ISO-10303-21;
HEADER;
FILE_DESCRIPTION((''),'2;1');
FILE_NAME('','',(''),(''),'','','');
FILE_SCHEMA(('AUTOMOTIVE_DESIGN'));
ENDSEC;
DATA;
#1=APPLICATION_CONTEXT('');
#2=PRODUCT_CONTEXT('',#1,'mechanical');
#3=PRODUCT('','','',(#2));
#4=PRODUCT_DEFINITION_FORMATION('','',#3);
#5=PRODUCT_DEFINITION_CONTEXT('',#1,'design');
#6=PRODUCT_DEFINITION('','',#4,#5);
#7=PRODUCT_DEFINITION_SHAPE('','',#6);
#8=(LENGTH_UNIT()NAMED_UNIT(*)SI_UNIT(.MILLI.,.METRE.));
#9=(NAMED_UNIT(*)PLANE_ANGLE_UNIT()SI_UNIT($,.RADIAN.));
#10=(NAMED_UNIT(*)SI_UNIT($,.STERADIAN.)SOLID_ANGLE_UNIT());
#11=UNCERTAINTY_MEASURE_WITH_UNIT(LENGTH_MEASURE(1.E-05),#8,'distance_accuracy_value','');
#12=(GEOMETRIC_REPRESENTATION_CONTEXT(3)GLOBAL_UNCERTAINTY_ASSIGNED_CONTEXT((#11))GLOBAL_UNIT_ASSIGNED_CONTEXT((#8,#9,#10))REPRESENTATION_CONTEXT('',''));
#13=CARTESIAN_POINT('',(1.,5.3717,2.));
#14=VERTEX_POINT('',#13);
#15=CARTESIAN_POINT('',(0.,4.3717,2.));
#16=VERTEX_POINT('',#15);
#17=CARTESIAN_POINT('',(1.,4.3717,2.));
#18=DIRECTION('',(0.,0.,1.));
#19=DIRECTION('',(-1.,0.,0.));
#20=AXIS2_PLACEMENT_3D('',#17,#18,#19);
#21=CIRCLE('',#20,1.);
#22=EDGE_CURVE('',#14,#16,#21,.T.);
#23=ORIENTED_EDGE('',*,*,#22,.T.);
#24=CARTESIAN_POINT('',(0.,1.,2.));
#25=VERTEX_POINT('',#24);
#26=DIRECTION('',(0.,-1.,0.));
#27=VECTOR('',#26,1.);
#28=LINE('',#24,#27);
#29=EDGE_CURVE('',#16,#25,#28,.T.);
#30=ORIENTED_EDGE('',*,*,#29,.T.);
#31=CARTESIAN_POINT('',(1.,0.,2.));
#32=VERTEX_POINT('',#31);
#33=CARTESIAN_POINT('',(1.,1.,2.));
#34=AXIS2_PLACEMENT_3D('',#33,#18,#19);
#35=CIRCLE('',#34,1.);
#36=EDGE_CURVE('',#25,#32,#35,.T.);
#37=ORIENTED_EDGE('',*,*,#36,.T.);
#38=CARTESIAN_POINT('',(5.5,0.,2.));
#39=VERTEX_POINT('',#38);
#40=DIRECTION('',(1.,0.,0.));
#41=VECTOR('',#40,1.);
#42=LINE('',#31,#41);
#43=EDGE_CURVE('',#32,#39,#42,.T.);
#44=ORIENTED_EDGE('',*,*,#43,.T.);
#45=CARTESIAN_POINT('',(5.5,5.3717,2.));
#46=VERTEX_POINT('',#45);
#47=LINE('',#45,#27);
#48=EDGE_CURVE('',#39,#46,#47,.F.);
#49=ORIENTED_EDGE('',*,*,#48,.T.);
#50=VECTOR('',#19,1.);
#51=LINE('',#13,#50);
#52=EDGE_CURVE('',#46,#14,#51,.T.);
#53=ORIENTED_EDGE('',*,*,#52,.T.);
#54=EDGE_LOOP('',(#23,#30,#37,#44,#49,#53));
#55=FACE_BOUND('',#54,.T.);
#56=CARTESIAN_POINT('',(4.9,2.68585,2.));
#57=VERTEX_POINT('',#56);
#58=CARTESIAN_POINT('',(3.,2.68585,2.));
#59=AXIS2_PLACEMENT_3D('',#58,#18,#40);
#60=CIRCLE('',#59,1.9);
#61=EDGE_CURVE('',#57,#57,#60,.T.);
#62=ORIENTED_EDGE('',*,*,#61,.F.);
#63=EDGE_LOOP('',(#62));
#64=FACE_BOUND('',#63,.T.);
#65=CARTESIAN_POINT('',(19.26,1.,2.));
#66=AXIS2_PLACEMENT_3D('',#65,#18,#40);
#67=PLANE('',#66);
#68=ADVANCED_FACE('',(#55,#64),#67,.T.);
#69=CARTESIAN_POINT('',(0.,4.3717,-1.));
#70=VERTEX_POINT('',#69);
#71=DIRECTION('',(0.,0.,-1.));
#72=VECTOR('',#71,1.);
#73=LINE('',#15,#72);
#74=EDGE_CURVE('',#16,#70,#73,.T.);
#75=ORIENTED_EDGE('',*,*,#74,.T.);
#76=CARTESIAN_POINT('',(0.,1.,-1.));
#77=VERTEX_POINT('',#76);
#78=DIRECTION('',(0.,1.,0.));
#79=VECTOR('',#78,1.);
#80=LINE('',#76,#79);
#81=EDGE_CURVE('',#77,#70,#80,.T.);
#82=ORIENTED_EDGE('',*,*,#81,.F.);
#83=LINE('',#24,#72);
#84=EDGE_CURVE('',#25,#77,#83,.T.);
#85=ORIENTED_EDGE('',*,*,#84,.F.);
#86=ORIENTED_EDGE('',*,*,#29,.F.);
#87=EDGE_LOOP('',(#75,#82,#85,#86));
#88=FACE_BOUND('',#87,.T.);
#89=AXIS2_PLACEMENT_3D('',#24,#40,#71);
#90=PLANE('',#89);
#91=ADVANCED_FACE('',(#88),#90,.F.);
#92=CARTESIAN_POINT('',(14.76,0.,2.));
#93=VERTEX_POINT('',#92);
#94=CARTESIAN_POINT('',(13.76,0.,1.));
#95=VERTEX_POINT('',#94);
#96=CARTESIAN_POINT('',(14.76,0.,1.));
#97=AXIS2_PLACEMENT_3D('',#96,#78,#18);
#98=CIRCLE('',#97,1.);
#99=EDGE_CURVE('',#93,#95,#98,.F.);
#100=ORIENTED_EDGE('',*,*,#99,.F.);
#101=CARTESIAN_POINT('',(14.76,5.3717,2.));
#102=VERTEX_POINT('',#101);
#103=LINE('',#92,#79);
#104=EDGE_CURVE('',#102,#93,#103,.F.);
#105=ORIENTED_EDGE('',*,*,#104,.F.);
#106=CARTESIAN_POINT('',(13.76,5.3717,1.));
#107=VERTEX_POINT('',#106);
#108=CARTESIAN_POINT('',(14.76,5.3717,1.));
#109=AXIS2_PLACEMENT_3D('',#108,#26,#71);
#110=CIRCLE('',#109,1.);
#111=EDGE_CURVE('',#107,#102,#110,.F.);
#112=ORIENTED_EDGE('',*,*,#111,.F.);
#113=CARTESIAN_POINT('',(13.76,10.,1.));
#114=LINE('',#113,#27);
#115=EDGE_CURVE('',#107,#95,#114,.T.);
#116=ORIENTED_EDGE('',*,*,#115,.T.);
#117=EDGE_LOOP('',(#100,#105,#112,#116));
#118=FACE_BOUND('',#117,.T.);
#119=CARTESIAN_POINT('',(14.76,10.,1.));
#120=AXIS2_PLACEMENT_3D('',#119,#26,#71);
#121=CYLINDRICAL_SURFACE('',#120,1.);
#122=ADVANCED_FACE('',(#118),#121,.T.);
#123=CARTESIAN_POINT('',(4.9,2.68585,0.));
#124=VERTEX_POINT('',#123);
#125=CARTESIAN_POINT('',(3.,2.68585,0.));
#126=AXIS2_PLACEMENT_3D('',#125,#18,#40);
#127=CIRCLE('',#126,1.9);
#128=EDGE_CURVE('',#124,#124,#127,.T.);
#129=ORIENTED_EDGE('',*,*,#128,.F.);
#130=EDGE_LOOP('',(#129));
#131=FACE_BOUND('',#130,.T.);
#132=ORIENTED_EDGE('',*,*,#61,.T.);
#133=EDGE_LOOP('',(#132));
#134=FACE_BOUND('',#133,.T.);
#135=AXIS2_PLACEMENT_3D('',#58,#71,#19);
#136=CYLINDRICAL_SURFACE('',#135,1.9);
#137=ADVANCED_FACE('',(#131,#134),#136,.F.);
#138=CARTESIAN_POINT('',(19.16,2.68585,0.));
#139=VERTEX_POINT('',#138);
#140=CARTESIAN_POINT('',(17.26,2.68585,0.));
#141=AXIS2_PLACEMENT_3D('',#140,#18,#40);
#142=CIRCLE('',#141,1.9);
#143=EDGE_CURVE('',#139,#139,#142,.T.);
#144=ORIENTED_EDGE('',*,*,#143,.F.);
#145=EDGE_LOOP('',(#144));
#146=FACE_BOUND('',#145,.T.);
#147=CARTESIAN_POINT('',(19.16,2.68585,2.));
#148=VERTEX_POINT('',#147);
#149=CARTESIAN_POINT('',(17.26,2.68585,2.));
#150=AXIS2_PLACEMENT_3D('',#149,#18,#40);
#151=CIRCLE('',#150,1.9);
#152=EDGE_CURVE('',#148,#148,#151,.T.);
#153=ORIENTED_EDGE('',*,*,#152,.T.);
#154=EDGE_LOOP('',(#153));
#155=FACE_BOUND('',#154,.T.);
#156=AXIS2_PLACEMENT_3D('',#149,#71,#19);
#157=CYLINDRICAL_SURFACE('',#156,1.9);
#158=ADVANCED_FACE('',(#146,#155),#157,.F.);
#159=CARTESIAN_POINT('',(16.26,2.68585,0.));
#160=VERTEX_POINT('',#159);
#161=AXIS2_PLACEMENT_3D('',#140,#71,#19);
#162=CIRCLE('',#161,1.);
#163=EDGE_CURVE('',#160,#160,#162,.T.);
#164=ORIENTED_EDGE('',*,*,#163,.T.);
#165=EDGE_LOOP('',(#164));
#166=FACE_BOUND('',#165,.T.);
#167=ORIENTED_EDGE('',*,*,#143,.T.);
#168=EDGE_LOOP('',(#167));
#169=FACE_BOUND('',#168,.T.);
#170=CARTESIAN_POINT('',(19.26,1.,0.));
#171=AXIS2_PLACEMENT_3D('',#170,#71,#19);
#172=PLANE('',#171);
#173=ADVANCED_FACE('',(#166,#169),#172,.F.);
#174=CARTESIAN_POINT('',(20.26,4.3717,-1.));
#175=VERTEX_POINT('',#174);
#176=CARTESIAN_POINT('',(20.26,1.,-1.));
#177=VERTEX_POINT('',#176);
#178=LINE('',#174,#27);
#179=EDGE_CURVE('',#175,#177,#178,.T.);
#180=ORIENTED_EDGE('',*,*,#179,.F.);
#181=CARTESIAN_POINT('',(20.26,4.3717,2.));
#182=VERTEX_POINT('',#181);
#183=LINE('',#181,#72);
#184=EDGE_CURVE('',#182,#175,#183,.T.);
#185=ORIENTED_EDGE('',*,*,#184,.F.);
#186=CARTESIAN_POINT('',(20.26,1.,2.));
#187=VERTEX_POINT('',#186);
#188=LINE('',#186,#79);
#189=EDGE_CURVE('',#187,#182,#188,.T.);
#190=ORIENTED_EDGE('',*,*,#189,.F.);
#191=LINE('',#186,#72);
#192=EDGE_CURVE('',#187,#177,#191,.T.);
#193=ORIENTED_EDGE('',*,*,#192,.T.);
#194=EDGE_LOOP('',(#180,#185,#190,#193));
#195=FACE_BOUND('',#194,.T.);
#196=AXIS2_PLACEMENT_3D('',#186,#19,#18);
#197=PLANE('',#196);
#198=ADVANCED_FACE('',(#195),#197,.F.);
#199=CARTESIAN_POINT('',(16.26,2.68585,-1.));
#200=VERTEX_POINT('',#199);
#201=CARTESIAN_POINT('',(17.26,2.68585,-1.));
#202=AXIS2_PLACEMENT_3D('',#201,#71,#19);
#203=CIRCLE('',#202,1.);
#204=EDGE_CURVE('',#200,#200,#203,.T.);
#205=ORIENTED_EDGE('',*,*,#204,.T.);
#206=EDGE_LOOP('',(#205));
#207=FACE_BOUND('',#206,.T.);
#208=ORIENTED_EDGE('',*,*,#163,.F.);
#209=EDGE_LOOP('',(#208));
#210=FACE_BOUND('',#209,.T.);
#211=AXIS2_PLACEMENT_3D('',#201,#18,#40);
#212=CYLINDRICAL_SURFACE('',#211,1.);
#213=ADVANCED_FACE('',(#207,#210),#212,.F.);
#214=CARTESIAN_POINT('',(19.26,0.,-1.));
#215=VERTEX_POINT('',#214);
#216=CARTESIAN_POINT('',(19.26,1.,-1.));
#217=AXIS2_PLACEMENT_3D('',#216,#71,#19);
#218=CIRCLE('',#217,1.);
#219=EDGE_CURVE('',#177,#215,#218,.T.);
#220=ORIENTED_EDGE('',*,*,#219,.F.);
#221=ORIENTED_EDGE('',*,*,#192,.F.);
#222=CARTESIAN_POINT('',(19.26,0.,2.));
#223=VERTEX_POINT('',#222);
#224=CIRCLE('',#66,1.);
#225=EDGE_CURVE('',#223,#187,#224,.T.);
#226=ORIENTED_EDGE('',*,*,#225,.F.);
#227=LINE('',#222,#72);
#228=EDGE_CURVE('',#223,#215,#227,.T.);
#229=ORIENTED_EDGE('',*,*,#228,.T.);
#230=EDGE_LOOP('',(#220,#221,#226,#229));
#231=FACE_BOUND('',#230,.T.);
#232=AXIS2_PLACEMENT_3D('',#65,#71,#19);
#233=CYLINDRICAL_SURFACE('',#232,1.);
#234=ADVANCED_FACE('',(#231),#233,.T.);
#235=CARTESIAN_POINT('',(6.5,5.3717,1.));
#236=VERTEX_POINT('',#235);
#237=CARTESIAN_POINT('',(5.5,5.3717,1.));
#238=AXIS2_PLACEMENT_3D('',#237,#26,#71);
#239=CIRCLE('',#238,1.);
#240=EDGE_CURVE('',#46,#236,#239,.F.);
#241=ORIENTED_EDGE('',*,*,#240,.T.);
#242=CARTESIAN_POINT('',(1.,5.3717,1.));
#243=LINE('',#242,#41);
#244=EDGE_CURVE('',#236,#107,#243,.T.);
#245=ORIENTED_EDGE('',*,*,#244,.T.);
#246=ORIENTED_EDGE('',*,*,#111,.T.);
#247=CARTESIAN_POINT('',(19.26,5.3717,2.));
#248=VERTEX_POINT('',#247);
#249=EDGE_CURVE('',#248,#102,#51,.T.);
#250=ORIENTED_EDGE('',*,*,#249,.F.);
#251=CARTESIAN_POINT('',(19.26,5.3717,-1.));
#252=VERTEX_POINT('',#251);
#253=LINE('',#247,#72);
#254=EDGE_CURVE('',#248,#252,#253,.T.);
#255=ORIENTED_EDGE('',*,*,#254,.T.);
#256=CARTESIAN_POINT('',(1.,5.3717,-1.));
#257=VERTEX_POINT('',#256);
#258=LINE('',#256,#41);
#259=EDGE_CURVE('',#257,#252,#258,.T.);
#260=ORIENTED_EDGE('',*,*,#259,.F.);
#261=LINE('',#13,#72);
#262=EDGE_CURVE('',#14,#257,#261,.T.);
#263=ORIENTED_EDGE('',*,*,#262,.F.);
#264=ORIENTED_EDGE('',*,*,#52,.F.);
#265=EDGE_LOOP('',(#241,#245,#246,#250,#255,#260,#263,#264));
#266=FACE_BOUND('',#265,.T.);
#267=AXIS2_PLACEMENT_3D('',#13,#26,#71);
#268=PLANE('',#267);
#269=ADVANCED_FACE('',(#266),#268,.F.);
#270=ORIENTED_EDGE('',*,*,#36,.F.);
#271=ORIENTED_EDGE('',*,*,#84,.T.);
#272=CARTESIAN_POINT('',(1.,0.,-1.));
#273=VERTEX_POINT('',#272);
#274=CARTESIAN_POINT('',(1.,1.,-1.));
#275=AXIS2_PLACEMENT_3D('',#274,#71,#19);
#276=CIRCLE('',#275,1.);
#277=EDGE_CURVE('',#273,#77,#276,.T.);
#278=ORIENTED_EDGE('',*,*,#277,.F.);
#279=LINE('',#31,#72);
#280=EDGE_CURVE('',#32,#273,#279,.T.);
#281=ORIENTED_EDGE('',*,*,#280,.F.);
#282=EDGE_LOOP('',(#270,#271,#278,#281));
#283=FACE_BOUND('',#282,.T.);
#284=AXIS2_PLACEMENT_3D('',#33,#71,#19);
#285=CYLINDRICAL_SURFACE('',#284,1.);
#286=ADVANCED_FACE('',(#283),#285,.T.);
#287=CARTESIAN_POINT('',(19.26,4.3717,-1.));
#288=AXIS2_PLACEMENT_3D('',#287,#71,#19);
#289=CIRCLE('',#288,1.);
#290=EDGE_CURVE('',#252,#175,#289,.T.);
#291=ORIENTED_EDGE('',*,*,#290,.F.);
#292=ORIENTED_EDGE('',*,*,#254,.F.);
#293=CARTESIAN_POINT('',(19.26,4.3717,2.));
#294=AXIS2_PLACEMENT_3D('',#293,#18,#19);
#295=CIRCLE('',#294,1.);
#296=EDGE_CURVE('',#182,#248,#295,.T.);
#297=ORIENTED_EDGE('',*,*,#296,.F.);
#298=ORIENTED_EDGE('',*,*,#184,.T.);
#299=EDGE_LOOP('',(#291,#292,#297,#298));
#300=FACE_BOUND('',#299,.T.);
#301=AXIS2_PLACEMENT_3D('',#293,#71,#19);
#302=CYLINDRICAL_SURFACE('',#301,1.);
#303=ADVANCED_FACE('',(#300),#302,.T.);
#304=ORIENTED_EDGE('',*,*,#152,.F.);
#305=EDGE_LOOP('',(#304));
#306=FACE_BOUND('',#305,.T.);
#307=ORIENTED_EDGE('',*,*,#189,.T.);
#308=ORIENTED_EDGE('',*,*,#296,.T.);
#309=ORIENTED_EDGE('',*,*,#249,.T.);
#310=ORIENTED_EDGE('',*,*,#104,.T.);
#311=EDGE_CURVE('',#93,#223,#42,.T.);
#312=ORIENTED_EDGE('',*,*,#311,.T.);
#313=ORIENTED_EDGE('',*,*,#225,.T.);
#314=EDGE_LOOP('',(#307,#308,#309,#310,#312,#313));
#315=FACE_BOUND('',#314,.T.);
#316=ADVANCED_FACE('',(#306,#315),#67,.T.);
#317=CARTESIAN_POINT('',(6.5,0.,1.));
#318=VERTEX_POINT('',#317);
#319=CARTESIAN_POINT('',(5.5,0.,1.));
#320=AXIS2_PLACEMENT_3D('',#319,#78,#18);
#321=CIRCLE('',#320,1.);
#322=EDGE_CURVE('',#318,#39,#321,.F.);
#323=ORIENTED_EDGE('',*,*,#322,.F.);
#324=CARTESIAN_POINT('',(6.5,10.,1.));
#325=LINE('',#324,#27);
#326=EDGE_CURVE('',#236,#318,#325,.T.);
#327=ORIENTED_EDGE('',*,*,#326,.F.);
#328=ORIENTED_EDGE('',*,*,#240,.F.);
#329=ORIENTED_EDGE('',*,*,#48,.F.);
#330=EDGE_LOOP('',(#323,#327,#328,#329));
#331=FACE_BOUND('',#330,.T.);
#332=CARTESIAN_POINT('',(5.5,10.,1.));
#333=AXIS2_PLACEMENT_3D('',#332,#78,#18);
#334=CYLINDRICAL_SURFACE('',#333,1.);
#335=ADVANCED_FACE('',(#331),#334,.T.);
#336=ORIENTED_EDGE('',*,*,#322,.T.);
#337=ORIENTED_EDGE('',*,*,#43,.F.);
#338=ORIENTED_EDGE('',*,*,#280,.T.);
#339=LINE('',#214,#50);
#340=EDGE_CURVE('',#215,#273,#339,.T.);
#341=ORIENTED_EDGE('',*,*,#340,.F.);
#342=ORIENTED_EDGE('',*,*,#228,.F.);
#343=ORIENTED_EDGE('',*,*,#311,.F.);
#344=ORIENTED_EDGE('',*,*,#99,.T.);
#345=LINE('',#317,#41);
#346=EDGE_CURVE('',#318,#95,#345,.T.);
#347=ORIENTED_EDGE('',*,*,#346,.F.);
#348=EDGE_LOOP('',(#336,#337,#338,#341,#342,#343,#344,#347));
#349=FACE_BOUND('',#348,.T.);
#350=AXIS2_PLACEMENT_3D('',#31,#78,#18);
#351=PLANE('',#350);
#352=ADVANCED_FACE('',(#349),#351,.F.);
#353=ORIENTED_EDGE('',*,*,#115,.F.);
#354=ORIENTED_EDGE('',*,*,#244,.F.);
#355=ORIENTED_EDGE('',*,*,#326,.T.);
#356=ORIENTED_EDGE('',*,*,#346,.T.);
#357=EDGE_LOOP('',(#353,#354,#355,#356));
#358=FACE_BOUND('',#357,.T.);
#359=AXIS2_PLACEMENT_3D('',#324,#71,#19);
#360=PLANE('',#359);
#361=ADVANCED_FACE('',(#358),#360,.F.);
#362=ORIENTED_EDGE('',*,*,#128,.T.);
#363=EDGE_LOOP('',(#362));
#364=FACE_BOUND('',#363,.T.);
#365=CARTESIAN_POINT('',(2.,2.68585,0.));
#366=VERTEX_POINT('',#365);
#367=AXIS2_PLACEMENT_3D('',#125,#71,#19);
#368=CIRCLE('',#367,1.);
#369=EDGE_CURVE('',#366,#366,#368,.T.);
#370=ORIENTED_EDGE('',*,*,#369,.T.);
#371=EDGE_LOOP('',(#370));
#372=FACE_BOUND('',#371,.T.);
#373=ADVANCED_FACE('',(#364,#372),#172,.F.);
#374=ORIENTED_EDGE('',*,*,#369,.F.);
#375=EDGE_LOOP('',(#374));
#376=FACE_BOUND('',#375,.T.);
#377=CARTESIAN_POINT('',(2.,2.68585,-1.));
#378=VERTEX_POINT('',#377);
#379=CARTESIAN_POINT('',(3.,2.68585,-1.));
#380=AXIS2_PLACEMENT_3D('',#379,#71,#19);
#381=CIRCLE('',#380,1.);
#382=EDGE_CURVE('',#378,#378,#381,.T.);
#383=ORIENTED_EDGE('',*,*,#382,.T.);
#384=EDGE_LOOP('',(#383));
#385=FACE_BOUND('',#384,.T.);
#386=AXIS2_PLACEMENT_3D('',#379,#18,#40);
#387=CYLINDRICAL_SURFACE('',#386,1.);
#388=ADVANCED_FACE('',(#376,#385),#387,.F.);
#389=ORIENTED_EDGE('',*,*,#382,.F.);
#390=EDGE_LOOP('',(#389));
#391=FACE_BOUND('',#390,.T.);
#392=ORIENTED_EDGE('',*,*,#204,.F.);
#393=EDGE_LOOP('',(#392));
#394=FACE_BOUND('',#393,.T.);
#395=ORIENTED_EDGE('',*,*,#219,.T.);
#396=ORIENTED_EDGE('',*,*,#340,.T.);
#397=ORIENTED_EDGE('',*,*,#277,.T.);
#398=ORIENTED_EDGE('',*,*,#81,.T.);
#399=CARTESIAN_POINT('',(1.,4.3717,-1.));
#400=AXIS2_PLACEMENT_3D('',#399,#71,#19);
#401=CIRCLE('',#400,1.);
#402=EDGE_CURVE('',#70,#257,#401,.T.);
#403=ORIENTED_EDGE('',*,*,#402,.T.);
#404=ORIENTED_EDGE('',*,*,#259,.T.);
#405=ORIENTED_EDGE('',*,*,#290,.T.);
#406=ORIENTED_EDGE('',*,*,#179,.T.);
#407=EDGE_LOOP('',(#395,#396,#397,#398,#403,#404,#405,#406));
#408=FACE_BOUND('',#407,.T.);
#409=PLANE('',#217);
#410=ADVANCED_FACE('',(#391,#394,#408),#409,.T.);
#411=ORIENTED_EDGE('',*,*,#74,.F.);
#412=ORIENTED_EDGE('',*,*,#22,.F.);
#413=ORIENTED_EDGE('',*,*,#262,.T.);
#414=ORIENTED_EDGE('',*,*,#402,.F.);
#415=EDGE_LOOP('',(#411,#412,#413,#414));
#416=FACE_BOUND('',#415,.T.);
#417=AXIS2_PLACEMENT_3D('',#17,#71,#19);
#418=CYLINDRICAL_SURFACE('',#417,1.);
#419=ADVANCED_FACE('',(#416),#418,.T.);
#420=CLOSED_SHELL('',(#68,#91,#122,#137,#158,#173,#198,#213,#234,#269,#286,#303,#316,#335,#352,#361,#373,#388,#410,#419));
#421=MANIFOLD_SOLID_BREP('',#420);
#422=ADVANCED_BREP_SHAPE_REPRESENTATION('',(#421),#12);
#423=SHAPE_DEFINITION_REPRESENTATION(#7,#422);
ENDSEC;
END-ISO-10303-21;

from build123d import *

# Parameters (mm, degrees)
SKETCH1_R           = 1.9
BOSS_EXTRUDE1_DEPTH = 2
BOSS_EXTRUDE2_START = 1
SKETCH2_R           = 1
BOSS_EXTRUDE2_DEPTH = 1
SKETCH3_W           = 7.26
SKETCH3_H           = 2.991248821
CUT_EXTRUDE1_DEPTH  = 10
FILLET1_R           = 1


with BuildPart() as part:
    # Sketch1 → Boss-Extrude1 (new body)
    with BuildSketch(Plane.XY):
        with BuildLine():
            Line((1, 0), (19.26, 0))
            ThreePointArc((19.26, 0), (19.967106781, 0.292893219), (20.26, 1))
            Line((20.26, 1), (20.26, 4.371699928))
            ThreePointArc((20.26, 4.371699928), (19.967106781, 5.078806709), (19.26, 5.371699928))
            Line((19.26, 5.371699928), (1, 5.371699928))
            ThreePointArc((1, 5.371699928), (0.292893219, 5.078806709), (0, 4.371699928))
            Line((0, 4.371699928), (0, 1))
            ThreePointArc((0, 1), (0.292893219, 0.292893219), (1, 0))
        make_face()
        with Locations((3, 2.685849964)):
            Circle(SKETCH1_R, mode=Mode.SUBTRACT)
        with Locations((17.26, 2.685849964)):
            Circle(SKETCH1_R, mode=Mode.SUBTRACT)
    extrude(amount=BOSS_EXTRUDE1_DEPTH)

    # Sketch2 → Boss-Extrude2 (add)
    with BuildSketch(Plane(origin=(0, 0, 0), x_dir=(-1, 0, 0), z_dir=(0, 0, -1)).offset(BOSS_EXTRUDE2_START)):
        with BuildLine():
            Line((-19.26, 0), (-1, 0))
            ThreePointArc((-1, 0), (-0.292893219, 0.292893219), (0, 1))
            Line((0, 1), (0, 4.371699928))
            ThreePointArc((0, 4.371699928), (-0.292893219, 5.078806709), (-1, 5.371699928))
            Line((-1, 5.371699928), (-19.26, 5.371699928))
            ThreePointArc((-19.26, 5.371699928), (-19.967106781, 5.078806709), (-20.26, 4.371699928))
            Line((-20.26, 4.371699928), (-20.26, 1))
            ThreePointArc((-20.26, 1), (-19.967106781, 0.292893219), (-19.26, 0))
        make_face()
        with Locations((-17.26, 2.685849964)):
            Circle(SKETCH2_R, mode=Mode.SUBTRACT)
        with Locations((-3, 2.685849964)):
            Circle(SKETCH2_R, mode=Mode.SUBTRACT)
    extrude(amount=-BOSS_EXTRUDE2_DEPTH)

    # Sketch3 → Cut-Extrude1 (cut)
    with BuildSketch(Plane.XZ):
        with Locations((10.13, 2.495624411)):
            Rectangle(SKETCH3_W, SKETCH3_H)
    extrude(amount=-CUT_EXTRUDE1_DEPTH, mode=Mode.SUBTRACT)

    # Fillet1
    fillet1_edges = [part.edges().sort_by_distance(p)[0] for p in [
        (13.76, 2.685849964, 2),
        (6.5, 2.685849964, 2),
    ]]
    fillet(fillet1_edges, radius=FILLET1_R - 0.0001)  # a hair under: the kernel refuses the full size


solid = part.part
